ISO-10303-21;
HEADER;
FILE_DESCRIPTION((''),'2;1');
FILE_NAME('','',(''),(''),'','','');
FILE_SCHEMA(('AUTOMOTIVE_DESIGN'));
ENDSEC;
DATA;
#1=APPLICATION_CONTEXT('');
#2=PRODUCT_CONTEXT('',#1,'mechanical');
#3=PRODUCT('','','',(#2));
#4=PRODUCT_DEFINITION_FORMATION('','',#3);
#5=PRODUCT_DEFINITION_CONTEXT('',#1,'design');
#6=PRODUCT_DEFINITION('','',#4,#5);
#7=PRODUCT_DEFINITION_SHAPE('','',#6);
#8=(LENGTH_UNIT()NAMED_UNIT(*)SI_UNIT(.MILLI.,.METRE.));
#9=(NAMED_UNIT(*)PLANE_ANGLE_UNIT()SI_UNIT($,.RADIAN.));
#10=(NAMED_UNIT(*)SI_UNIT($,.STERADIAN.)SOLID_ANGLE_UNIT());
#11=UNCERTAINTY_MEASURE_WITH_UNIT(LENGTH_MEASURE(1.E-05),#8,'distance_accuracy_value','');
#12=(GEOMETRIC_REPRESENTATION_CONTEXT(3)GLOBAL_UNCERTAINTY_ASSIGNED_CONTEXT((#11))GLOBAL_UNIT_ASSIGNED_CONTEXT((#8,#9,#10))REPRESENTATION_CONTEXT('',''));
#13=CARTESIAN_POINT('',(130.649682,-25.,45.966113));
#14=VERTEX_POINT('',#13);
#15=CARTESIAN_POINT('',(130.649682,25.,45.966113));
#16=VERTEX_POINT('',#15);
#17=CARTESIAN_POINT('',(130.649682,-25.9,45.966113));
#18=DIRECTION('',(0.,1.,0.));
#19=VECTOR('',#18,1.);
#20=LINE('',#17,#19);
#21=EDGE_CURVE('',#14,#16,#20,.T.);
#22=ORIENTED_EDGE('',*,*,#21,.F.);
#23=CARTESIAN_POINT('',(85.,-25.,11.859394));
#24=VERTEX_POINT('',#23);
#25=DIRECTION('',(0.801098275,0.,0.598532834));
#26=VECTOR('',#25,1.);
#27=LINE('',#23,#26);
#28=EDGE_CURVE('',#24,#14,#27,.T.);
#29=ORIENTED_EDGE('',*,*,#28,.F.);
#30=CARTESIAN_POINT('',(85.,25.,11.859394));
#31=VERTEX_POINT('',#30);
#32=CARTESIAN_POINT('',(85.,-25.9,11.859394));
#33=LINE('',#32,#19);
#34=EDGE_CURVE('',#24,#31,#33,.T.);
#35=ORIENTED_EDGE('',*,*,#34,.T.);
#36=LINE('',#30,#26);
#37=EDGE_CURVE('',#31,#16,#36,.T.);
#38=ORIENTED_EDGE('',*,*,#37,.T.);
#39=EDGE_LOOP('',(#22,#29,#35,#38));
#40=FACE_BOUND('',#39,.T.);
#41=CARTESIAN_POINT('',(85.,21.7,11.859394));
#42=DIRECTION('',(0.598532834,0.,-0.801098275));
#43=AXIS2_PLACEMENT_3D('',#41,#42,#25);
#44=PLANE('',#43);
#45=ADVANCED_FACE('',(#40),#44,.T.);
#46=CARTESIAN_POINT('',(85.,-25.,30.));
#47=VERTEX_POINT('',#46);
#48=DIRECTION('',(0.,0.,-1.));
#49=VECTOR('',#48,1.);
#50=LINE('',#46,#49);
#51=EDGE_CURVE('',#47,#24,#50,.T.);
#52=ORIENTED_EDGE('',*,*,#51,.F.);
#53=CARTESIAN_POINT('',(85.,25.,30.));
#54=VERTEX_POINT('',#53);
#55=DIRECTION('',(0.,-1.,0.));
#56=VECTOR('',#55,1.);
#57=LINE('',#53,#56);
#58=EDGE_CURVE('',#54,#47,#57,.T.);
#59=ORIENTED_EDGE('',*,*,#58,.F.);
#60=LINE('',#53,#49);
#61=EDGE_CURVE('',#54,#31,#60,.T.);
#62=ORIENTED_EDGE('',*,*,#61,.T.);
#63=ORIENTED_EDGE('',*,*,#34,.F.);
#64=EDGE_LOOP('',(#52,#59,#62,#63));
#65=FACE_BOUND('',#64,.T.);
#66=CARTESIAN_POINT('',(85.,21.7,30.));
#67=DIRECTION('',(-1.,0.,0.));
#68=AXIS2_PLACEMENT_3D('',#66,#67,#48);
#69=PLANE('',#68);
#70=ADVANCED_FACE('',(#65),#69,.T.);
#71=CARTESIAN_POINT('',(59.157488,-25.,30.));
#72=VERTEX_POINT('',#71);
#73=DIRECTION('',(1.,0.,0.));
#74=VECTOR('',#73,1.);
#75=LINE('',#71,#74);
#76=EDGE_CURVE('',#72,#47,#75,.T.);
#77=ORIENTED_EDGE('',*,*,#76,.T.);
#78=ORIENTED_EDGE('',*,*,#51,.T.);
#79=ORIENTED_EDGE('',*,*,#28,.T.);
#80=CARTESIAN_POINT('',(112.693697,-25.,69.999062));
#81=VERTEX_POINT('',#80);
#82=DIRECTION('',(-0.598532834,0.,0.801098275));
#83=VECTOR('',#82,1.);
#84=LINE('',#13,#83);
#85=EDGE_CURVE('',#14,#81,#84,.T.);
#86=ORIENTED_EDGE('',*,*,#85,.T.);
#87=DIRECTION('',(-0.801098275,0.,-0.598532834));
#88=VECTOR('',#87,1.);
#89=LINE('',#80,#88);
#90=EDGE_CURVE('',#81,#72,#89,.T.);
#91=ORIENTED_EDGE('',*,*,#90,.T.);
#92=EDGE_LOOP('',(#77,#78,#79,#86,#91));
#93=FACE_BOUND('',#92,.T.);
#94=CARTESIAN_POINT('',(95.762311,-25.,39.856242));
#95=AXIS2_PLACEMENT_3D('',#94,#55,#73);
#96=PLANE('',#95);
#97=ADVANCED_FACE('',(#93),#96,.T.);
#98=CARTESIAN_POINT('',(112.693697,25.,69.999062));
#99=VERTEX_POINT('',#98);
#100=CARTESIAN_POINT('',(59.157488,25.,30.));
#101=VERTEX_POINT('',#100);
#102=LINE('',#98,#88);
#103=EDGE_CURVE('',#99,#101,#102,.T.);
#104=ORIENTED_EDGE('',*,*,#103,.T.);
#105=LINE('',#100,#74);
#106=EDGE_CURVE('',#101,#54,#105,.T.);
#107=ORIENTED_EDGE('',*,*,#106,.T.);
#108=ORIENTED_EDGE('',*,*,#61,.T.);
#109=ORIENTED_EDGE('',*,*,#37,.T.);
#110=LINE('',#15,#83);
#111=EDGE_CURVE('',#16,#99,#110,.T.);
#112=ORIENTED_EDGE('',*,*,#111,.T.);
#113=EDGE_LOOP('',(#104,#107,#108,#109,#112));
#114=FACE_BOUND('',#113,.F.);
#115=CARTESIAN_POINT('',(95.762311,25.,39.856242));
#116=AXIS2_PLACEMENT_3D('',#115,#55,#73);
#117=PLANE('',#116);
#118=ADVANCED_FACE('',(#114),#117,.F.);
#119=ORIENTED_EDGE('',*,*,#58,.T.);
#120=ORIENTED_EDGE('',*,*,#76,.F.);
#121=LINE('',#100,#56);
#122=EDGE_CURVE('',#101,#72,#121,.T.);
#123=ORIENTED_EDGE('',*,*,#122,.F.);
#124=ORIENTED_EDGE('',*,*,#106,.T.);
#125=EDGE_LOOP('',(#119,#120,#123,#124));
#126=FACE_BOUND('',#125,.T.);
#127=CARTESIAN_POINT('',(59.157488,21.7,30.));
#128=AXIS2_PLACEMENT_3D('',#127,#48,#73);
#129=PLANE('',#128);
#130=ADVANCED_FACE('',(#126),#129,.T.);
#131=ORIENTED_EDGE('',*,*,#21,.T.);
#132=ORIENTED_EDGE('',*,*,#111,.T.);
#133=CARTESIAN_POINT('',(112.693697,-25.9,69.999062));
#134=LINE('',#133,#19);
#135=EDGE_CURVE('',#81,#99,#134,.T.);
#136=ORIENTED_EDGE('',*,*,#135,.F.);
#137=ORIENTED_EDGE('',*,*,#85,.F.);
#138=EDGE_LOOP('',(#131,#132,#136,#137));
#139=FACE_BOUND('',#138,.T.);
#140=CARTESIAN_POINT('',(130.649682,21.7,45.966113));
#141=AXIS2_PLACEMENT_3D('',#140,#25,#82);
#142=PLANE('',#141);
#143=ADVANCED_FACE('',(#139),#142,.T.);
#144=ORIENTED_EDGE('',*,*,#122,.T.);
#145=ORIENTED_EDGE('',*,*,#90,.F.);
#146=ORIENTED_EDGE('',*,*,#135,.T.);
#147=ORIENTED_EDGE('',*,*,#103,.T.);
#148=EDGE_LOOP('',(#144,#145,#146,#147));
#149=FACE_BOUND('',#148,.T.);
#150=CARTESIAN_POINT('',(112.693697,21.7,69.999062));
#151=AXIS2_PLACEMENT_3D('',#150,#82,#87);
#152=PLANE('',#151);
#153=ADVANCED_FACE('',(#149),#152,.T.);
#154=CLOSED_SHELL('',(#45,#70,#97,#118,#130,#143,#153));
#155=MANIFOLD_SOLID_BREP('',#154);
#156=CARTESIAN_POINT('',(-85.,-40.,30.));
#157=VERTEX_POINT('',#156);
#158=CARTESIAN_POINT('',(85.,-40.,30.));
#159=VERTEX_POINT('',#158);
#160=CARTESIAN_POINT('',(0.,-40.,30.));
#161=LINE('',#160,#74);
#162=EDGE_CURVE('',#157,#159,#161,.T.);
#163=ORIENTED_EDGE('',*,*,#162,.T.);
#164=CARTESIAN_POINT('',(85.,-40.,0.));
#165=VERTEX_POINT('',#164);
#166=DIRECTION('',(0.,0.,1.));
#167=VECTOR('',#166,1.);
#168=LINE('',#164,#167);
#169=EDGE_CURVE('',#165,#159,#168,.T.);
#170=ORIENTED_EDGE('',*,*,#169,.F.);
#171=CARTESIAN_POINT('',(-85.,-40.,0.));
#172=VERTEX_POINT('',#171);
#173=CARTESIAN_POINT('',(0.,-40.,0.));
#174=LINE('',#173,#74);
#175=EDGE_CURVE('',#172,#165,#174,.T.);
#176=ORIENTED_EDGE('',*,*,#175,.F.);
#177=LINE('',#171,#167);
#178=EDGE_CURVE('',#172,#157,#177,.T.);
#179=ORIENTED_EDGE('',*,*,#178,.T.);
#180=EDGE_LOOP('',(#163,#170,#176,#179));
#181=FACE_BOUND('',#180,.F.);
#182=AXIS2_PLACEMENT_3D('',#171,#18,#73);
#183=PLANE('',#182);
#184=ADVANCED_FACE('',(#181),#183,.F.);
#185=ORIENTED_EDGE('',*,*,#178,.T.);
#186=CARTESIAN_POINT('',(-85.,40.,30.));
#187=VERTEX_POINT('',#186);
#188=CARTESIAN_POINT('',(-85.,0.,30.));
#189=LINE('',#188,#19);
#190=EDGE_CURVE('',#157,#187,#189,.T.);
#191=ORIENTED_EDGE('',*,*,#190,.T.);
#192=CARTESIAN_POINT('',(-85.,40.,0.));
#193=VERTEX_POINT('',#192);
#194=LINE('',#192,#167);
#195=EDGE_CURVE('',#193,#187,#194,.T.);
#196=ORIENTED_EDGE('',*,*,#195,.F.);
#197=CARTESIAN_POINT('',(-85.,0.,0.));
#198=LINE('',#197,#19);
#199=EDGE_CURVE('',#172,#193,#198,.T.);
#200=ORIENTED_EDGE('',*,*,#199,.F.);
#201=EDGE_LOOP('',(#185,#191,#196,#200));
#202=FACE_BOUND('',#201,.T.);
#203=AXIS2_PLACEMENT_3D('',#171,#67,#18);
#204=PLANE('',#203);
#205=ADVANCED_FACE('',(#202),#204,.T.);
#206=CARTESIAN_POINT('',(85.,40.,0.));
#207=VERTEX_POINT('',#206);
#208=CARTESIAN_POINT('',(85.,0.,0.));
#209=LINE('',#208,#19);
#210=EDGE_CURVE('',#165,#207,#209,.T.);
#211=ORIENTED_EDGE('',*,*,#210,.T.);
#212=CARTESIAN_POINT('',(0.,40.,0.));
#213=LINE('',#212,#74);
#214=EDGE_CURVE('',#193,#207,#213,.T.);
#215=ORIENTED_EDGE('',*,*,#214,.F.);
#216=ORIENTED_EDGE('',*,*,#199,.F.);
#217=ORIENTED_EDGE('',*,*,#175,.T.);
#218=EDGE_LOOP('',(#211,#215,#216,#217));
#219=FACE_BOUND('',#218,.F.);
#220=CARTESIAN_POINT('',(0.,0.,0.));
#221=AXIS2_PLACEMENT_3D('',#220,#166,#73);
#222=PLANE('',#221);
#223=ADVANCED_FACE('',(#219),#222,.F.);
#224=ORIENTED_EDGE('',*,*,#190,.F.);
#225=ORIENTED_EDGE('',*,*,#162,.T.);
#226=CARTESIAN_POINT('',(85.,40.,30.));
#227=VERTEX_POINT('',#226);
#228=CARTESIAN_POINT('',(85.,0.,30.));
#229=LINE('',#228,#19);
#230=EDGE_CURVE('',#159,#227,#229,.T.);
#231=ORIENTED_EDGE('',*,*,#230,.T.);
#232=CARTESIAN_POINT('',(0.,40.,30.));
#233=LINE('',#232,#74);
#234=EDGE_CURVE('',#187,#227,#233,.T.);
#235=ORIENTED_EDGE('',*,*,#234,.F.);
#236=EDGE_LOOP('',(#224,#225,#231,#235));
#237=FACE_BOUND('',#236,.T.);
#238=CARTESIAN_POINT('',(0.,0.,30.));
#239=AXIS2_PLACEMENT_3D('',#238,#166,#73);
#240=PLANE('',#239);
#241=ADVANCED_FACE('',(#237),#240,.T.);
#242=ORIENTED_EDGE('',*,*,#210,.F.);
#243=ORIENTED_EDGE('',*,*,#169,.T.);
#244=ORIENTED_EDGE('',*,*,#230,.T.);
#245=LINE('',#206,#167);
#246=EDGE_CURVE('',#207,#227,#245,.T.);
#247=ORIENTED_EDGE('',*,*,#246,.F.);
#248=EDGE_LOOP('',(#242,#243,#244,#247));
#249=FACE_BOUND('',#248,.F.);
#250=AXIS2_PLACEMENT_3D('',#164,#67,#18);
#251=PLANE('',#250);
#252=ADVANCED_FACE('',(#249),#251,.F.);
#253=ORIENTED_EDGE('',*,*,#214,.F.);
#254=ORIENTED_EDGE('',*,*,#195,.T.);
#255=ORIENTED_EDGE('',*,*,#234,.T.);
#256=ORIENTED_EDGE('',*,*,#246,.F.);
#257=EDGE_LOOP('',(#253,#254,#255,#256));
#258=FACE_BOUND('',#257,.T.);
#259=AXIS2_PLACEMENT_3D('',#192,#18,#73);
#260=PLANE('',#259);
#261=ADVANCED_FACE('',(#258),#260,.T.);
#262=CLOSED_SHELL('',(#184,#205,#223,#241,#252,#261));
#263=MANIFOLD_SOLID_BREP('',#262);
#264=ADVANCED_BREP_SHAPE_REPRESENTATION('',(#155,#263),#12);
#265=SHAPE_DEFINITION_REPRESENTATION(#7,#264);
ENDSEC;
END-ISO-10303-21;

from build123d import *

# Parameters (mm, degrees)
F0_W     = 170
F0_H     = 80
F1_DEPTH = 30
F3_DEPTH = 61.7
F4_DEPTH = 14.1
F7_DEPTH = 3.3
F8_DEPTH = 0.9


with BuildPart() as f1:
    # F0 (on Top) → F1 (new body)
    with BuildSketch(Plane.XY):
        Rectangle(F0_W, F0_H)
    extrude(amount=F1_DEPTH)


with BuildPart() as f3:
    # F2 (on face) → F3 (new body)
    with BuildSketch(Plane.XZ.offset(40)):
        Polygon((112.6936972141, 69.9990615249), (59.1574877457, 30), (85, 30), (85, 11.8593943491), (130.649682243, 45.9661132737), align=None)
    extrude(amount=-F3_DEPTH)

    # F4 (cut): a face of the model
    f4_faces = [f3.faces().sort_by_distance(p)[0] for p in [
        (99.5026263907, -40, 42.0152443758),
    ]]
    extrude(f4_faces, amount=-F4_DEPTH, mode=Mode.SUBTRACT)

    # F7 (add, through all): a face of the model
    f7_faces = [f3.faces().sort_by_distance(p)[0] for p in [
        (99.5026263907, 21.7, 42.0152443758),
    ]]
    extrude(f7_faces, amount=F7_DEPTH)

    # F8 (cut, through all): a face of the model
    f8_faces = [f3.faces().sort_by_distance(p)[0] for p in [
        (99.5026263907, -25.9, 42.0152443758),
    ]]
    extrude(f8_faces, amount=-F8_DEPTH, mode=Mode.SUBTRACT)


solid = Compound([f1.part, f3.part])
